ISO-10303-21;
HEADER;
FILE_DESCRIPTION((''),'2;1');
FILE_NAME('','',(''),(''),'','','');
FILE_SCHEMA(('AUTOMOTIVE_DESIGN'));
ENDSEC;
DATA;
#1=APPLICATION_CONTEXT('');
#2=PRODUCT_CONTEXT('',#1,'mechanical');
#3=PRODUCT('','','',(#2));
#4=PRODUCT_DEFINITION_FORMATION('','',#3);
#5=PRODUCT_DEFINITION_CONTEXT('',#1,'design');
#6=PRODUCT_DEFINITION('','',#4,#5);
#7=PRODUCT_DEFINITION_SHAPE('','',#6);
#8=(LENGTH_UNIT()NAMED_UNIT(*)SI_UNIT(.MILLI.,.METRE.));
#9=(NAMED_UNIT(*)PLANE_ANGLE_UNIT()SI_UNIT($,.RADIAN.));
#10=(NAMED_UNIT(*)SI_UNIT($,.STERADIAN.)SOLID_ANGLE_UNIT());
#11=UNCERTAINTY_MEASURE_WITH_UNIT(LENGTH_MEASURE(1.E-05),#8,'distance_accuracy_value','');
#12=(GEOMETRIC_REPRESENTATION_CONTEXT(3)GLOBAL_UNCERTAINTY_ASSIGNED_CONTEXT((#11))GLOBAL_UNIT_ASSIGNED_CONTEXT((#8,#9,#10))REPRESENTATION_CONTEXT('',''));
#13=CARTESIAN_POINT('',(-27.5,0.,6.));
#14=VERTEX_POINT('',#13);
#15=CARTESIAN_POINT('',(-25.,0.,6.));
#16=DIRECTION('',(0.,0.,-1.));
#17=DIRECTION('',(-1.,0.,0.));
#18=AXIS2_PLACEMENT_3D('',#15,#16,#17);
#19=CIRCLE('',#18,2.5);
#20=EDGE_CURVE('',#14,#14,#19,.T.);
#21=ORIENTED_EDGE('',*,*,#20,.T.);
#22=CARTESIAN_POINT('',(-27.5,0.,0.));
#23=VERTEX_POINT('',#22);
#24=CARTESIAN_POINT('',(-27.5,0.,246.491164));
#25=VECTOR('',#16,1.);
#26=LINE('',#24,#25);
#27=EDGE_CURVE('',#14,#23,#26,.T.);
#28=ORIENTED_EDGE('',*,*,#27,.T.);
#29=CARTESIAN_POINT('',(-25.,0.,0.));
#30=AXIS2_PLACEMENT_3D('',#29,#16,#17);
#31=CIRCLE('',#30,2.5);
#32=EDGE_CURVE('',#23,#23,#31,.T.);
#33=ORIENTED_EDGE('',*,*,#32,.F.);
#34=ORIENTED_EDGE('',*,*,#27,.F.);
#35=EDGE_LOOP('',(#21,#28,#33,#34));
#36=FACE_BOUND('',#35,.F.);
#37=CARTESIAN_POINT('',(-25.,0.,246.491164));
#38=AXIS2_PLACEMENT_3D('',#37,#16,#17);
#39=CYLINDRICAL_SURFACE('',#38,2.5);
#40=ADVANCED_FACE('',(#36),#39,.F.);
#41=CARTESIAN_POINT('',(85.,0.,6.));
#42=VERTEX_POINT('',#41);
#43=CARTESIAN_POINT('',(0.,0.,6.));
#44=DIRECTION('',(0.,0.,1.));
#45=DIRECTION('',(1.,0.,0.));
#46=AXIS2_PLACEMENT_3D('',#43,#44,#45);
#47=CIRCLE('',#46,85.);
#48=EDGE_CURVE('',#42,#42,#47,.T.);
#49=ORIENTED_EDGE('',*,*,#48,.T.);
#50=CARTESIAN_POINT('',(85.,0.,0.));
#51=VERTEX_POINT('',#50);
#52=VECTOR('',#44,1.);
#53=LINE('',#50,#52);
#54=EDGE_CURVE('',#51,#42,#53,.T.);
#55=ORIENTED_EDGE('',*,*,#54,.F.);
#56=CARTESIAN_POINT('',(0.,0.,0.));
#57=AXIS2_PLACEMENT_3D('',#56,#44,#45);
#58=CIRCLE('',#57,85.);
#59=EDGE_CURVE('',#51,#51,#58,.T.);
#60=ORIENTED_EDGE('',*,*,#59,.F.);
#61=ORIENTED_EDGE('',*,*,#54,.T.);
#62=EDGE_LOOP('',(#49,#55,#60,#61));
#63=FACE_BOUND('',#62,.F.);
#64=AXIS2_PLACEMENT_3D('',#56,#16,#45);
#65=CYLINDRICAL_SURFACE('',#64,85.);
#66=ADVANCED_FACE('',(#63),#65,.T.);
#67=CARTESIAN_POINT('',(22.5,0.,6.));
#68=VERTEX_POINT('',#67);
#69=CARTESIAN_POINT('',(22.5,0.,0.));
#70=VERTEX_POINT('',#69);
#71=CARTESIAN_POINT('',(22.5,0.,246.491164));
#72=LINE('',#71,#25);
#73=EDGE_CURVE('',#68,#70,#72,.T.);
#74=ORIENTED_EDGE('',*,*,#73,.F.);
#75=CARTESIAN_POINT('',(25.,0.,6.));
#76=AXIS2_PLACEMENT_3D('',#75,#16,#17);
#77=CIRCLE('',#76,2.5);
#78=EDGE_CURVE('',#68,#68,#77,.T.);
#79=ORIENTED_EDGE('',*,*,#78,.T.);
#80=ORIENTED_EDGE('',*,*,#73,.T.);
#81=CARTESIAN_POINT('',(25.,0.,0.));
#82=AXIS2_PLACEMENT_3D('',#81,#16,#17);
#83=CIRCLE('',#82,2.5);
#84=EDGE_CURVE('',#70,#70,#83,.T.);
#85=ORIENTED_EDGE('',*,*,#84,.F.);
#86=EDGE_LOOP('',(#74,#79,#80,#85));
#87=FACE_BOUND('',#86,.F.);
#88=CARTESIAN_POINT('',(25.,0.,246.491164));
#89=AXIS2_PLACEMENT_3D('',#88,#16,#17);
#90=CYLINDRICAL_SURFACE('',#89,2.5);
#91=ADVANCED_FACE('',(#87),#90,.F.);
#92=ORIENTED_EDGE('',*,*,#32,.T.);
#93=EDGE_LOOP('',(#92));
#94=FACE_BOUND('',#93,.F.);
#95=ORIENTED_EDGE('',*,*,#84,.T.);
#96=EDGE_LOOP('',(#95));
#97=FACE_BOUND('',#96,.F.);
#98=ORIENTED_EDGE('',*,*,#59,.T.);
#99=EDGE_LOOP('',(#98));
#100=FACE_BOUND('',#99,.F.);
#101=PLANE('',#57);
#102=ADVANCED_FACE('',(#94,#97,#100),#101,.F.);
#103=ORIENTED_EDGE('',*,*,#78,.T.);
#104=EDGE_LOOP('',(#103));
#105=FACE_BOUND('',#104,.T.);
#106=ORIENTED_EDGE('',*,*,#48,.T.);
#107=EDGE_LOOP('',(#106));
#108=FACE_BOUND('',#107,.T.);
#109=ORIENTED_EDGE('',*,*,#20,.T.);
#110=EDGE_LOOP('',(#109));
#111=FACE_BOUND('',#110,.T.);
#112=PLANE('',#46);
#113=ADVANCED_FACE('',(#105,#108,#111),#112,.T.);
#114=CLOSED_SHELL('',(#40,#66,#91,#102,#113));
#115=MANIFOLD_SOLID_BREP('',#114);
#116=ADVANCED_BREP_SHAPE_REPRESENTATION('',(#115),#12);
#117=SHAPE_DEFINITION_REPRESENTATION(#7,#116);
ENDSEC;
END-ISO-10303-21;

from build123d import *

# Parameters (mm, degrees)
F0_R     = 85
F1_DEPTH = 6
F3_D     = 5


# Not quite as in the source:
# - a feature of the source that left no trace in its solid (it failed there, or was rolled back) is left out


with BuildPart() as f1:
    # F0 (on Top) → F1 (new body)
    with BuildSketch(Plane.XY):
        Circle(F0_R)
    extrude(amount=F1_DEPTH)

    # F3 (through all)
    with Locations(Plane.XY.offset(6)):
        with Locations((-25, 0), (25, 0)):
            Hole(F3_D / 2)


solid = f1.part
